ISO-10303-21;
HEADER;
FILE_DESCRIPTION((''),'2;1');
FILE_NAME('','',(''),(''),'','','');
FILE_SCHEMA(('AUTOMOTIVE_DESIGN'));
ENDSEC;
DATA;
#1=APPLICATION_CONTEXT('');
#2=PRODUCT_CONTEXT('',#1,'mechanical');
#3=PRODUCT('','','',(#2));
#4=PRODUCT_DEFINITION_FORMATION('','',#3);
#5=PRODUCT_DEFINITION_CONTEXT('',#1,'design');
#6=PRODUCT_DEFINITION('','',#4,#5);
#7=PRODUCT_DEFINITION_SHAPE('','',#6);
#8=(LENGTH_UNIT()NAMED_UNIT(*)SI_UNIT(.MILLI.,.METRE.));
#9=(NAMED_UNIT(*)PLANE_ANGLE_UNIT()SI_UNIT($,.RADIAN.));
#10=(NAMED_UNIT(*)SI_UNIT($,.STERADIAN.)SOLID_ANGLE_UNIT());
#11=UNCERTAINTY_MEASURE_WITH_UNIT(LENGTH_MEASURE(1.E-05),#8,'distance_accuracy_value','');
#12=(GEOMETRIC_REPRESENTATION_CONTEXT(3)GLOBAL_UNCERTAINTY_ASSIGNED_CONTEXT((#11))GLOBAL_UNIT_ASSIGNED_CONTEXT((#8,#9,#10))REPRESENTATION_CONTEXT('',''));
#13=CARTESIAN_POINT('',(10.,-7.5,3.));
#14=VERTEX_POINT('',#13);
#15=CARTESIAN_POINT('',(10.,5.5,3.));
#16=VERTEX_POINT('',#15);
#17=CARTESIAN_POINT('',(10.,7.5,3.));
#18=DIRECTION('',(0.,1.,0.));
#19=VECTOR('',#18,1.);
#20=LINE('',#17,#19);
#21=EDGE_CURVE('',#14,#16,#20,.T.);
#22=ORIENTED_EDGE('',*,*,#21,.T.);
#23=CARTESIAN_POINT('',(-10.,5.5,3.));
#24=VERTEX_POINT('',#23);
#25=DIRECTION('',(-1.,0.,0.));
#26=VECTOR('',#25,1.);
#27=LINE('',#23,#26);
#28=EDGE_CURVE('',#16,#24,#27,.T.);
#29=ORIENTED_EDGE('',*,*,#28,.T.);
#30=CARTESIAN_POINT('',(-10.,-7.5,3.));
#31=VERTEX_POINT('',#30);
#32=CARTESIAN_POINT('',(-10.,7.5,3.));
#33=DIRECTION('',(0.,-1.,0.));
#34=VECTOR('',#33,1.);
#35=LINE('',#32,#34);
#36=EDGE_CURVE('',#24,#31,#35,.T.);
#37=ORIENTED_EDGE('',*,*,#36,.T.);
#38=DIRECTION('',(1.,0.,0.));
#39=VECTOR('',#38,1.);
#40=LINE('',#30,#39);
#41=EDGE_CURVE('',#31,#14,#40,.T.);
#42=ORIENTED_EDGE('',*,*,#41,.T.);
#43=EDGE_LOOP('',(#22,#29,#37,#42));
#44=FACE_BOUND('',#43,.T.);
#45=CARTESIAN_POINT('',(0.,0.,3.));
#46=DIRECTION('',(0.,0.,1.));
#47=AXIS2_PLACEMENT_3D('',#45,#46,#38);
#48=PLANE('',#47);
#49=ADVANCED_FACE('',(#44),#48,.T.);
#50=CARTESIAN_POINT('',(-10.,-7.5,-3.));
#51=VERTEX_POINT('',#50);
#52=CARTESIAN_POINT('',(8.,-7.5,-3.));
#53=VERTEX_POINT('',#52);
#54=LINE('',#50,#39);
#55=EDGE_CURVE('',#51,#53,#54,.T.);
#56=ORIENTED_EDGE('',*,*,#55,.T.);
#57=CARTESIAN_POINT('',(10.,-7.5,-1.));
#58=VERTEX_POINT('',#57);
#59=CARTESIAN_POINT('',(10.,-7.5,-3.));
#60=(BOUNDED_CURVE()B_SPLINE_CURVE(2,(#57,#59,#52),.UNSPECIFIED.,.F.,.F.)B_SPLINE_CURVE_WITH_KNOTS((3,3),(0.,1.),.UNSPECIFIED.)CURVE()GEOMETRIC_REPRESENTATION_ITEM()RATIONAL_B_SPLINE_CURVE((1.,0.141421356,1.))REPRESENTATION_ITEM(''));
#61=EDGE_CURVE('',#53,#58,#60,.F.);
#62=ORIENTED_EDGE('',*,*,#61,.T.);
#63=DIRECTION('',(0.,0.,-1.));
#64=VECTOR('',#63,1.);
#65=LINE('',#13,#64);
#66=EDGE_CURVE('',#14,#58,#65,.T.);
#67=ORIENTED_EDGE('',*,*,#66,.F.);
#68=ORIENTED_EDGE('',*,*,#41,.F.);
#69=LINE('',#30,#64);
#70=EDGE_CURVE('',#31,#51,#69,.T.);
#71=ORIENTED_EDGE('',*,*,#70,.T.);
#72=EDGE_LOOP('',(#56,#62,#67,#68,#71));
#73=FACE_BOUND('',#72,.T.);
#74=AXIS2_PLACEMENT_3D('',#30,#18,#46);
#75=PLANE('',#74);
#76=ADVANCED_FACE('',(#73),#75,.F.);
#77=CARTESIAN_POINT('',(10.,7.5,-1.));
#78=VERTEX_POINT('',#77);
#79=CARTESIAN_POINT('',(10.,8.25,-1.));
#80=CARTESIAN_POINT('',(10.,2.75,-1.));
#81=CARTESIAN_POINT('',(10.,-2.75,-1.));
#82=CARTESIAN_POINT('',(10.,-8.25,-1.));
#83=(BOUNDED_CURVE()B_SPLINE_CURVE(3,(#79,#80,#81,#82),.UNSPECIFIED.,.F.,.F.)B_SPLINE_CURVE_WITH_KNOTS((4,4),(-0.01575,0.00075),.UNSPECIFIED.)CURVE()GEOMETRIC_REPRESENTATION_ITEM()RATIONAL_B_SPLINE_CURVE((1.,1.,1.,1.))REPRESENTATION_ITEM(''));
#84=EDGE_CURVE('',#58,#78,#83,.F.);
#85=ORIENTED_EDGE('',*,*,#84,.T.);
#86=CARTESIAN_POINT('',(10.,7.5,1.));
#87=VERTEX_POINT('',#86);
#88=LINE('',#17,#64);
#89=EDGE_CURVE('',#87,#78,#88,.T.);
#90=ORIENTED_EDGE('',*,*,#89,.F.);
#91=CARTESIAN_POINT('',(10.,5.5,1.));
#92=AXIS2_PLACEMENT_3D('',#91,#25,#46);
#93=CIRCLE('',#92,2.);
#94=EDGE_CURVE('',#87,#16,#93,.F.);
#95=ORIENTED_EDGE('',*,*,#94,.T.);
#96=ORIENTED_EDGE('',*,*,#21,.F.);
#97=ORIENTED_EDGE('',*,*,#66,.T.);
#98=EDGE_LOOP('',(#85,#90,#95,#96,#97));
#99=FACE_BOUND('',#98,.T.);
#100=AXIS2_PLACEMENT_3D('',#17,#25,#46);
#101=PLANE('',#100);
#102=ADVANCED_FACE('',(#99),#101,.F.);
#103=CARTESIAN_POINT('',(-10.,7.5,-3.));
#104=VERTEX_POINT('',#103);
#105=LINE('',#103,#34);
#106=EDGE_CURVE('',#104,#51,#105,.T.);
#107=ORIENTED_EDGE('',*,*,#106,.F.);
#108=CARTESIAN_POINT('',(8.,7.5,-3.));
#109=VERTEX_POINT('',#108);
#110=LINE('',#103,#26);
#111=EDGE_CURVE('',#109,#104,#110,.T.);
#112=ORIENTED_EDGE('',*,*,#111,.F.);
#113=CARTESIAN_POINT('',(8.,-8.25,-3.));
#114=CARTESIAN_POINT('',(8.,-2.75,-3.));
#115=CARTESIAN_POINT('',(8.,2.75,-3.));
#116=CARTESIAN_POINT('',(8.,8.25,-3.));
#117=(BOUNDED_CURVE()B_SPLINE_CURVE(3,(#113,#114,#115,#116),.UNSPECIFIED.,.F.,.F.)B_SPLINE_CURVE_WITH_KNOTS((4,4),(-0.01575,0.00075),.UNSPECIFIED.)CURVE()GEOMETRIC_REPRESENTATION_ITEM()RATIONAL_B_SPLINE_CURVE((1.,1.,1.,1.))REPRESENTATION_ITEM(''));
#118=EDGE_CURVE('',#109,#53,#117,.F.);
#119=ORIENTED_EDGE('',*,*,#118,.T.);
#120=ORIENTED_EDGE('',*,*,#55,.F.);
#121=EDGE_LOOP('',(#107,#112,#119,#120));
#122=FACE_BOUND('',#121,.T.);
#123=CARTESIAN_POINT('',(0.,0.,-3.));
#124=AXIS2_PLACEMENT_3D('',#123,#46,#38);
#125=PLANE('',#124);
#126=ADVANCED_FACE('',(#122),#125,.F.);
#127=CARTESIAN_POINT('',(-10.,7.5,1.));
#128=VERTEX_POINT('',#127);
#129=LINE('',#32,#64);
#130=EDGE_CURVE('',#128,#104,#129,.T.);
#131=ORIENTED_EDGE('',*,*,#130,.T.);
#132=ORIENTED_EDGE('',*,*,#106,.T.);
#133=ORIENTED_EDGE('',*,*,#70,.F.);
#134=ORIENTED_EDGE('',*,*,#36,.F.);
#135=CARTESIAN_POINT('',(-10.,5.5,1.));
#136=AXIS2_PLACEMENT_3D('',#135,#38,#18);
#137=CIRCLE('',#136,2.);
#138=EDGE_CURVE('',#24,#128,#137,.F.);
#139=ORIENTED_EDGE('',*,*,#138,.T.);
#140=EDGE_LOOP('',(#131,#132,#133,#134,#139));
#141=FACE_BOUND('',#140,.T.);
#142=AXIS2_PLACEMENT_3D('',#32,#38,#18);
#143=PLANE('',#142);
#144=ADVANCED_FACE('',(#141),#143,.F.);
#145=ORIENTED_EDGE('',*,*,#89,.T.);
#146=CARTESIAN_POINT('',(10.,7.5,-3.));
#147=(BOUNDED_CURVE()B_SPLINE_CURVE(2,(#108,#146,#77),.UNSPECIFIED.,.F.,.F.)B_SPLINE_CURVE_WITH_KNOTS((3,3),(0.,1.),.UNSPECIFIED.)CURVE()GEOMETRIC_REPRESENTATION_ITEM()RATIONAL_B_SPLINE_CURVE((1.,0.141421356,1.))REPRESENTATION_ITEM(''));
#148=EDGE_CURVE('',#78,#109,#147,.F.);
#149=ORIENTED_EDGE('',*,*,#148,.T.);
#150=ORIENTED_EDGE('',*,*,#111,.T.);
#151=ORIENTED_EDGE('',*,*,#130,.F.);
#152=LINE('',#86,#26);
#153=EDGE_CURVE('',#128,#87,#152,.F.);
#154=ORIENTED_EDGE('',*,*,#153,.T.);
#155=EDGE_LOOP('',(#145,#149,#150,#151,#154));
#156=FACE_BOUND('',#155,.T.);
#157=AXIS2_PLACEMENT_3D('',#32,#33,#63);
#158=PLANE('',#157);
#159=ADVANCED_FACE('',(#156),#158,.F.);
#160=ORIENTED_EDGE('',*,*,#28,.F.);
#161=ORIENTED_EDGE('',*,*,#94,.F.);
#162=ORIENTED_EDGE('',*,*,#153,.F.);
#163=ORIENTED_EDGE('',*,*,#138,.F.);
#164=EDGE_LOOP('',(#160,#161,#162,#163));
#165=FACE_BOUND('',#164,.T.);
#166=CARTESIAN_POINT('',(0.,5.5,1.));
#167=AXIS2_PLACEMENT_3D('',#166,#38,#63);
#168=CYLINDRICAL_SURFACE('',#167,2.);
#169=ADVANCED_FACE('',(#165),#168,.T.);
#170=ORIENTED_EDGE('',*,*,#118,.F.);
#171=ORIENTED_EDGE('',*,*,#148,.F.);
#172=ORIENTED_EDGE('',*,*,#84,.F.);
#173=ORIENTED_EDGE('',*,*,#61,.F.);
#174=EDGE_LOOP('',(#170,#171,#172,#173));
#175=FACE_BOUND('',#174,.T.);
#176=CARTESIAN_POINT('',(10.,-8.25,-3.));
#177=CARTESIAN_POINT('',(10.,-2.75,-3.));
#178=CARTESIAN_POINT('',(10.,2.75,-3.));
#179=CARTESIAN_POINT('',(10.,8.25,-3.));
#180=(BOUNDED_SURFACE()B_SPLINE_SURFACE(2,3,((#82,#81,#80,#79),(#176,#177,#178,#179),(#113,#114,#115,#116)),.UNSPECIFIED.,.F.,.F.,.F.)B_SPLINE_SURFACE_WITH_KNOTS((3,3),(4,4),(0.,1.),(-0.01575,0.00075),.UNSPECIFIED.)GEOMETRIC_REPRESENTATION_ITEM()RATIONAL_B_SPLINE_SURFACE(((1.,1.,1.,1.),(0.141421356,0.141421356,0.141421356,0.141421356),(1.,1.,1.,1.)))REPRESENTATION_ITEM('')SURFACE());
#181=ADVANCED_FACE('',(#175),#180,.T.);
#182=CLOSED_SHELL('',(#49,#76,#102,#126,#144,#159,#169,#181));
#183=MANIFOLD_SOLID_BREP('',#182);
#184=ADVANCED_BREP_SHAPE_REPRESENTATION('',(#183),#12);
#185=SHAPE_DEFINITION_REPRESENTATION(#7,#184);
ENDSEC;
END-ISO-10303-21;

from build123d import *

# Parameters (mm, degrees)
SKETCH_1_W      = 20
SKETCH_1_H      = 15
EXTRUDE_1_DEPTH = 3
FILLET_1_R      = 2
FILLET_3_SIZE   = 2


with BuildPart() as part:
    # 草图1 → 凸台-拉伸1 (new, symmetric)
    with BuildSketch(Plane.XY):
        Rectangle(SKETCH_1_W, SKETCH_1_H)
    extrude(amount=EXTRUDE_1_DEPTH, both=True)

    # 圆角1
    fillet_1_edges = [part.edges().sort_by_distance(p)[0] for p in [
        (0, 7.5, 3),
    ]]
    fillet(fillet_1_edges, radius=FILLET_1_R)

    # 圆角3
    # a fillet whose section is not a circle: 2 mm, written as the material it takes off along each edge
    with BuildSketch(Plane(origin=(10, 12.5, -3), x_dir=(-1, 0, 0), z_dir=(0, -1, 0))) as fillet_3_piece_1:
        with BuildLine():
            Bezier((FILLET_3_SIZE, 0), (0, 0), (0, -FILLET_3_SIZE), weights=[1, 0.141421356, 1])
            Line((0, -FILLET_3_SIZE), (0, 0))
            Line((0, 0), (FILLET_3_SIZE, 0))
        make_face()
    extrude(amount=25, mode=Mode.SUBTRACT)


solid = part.part
